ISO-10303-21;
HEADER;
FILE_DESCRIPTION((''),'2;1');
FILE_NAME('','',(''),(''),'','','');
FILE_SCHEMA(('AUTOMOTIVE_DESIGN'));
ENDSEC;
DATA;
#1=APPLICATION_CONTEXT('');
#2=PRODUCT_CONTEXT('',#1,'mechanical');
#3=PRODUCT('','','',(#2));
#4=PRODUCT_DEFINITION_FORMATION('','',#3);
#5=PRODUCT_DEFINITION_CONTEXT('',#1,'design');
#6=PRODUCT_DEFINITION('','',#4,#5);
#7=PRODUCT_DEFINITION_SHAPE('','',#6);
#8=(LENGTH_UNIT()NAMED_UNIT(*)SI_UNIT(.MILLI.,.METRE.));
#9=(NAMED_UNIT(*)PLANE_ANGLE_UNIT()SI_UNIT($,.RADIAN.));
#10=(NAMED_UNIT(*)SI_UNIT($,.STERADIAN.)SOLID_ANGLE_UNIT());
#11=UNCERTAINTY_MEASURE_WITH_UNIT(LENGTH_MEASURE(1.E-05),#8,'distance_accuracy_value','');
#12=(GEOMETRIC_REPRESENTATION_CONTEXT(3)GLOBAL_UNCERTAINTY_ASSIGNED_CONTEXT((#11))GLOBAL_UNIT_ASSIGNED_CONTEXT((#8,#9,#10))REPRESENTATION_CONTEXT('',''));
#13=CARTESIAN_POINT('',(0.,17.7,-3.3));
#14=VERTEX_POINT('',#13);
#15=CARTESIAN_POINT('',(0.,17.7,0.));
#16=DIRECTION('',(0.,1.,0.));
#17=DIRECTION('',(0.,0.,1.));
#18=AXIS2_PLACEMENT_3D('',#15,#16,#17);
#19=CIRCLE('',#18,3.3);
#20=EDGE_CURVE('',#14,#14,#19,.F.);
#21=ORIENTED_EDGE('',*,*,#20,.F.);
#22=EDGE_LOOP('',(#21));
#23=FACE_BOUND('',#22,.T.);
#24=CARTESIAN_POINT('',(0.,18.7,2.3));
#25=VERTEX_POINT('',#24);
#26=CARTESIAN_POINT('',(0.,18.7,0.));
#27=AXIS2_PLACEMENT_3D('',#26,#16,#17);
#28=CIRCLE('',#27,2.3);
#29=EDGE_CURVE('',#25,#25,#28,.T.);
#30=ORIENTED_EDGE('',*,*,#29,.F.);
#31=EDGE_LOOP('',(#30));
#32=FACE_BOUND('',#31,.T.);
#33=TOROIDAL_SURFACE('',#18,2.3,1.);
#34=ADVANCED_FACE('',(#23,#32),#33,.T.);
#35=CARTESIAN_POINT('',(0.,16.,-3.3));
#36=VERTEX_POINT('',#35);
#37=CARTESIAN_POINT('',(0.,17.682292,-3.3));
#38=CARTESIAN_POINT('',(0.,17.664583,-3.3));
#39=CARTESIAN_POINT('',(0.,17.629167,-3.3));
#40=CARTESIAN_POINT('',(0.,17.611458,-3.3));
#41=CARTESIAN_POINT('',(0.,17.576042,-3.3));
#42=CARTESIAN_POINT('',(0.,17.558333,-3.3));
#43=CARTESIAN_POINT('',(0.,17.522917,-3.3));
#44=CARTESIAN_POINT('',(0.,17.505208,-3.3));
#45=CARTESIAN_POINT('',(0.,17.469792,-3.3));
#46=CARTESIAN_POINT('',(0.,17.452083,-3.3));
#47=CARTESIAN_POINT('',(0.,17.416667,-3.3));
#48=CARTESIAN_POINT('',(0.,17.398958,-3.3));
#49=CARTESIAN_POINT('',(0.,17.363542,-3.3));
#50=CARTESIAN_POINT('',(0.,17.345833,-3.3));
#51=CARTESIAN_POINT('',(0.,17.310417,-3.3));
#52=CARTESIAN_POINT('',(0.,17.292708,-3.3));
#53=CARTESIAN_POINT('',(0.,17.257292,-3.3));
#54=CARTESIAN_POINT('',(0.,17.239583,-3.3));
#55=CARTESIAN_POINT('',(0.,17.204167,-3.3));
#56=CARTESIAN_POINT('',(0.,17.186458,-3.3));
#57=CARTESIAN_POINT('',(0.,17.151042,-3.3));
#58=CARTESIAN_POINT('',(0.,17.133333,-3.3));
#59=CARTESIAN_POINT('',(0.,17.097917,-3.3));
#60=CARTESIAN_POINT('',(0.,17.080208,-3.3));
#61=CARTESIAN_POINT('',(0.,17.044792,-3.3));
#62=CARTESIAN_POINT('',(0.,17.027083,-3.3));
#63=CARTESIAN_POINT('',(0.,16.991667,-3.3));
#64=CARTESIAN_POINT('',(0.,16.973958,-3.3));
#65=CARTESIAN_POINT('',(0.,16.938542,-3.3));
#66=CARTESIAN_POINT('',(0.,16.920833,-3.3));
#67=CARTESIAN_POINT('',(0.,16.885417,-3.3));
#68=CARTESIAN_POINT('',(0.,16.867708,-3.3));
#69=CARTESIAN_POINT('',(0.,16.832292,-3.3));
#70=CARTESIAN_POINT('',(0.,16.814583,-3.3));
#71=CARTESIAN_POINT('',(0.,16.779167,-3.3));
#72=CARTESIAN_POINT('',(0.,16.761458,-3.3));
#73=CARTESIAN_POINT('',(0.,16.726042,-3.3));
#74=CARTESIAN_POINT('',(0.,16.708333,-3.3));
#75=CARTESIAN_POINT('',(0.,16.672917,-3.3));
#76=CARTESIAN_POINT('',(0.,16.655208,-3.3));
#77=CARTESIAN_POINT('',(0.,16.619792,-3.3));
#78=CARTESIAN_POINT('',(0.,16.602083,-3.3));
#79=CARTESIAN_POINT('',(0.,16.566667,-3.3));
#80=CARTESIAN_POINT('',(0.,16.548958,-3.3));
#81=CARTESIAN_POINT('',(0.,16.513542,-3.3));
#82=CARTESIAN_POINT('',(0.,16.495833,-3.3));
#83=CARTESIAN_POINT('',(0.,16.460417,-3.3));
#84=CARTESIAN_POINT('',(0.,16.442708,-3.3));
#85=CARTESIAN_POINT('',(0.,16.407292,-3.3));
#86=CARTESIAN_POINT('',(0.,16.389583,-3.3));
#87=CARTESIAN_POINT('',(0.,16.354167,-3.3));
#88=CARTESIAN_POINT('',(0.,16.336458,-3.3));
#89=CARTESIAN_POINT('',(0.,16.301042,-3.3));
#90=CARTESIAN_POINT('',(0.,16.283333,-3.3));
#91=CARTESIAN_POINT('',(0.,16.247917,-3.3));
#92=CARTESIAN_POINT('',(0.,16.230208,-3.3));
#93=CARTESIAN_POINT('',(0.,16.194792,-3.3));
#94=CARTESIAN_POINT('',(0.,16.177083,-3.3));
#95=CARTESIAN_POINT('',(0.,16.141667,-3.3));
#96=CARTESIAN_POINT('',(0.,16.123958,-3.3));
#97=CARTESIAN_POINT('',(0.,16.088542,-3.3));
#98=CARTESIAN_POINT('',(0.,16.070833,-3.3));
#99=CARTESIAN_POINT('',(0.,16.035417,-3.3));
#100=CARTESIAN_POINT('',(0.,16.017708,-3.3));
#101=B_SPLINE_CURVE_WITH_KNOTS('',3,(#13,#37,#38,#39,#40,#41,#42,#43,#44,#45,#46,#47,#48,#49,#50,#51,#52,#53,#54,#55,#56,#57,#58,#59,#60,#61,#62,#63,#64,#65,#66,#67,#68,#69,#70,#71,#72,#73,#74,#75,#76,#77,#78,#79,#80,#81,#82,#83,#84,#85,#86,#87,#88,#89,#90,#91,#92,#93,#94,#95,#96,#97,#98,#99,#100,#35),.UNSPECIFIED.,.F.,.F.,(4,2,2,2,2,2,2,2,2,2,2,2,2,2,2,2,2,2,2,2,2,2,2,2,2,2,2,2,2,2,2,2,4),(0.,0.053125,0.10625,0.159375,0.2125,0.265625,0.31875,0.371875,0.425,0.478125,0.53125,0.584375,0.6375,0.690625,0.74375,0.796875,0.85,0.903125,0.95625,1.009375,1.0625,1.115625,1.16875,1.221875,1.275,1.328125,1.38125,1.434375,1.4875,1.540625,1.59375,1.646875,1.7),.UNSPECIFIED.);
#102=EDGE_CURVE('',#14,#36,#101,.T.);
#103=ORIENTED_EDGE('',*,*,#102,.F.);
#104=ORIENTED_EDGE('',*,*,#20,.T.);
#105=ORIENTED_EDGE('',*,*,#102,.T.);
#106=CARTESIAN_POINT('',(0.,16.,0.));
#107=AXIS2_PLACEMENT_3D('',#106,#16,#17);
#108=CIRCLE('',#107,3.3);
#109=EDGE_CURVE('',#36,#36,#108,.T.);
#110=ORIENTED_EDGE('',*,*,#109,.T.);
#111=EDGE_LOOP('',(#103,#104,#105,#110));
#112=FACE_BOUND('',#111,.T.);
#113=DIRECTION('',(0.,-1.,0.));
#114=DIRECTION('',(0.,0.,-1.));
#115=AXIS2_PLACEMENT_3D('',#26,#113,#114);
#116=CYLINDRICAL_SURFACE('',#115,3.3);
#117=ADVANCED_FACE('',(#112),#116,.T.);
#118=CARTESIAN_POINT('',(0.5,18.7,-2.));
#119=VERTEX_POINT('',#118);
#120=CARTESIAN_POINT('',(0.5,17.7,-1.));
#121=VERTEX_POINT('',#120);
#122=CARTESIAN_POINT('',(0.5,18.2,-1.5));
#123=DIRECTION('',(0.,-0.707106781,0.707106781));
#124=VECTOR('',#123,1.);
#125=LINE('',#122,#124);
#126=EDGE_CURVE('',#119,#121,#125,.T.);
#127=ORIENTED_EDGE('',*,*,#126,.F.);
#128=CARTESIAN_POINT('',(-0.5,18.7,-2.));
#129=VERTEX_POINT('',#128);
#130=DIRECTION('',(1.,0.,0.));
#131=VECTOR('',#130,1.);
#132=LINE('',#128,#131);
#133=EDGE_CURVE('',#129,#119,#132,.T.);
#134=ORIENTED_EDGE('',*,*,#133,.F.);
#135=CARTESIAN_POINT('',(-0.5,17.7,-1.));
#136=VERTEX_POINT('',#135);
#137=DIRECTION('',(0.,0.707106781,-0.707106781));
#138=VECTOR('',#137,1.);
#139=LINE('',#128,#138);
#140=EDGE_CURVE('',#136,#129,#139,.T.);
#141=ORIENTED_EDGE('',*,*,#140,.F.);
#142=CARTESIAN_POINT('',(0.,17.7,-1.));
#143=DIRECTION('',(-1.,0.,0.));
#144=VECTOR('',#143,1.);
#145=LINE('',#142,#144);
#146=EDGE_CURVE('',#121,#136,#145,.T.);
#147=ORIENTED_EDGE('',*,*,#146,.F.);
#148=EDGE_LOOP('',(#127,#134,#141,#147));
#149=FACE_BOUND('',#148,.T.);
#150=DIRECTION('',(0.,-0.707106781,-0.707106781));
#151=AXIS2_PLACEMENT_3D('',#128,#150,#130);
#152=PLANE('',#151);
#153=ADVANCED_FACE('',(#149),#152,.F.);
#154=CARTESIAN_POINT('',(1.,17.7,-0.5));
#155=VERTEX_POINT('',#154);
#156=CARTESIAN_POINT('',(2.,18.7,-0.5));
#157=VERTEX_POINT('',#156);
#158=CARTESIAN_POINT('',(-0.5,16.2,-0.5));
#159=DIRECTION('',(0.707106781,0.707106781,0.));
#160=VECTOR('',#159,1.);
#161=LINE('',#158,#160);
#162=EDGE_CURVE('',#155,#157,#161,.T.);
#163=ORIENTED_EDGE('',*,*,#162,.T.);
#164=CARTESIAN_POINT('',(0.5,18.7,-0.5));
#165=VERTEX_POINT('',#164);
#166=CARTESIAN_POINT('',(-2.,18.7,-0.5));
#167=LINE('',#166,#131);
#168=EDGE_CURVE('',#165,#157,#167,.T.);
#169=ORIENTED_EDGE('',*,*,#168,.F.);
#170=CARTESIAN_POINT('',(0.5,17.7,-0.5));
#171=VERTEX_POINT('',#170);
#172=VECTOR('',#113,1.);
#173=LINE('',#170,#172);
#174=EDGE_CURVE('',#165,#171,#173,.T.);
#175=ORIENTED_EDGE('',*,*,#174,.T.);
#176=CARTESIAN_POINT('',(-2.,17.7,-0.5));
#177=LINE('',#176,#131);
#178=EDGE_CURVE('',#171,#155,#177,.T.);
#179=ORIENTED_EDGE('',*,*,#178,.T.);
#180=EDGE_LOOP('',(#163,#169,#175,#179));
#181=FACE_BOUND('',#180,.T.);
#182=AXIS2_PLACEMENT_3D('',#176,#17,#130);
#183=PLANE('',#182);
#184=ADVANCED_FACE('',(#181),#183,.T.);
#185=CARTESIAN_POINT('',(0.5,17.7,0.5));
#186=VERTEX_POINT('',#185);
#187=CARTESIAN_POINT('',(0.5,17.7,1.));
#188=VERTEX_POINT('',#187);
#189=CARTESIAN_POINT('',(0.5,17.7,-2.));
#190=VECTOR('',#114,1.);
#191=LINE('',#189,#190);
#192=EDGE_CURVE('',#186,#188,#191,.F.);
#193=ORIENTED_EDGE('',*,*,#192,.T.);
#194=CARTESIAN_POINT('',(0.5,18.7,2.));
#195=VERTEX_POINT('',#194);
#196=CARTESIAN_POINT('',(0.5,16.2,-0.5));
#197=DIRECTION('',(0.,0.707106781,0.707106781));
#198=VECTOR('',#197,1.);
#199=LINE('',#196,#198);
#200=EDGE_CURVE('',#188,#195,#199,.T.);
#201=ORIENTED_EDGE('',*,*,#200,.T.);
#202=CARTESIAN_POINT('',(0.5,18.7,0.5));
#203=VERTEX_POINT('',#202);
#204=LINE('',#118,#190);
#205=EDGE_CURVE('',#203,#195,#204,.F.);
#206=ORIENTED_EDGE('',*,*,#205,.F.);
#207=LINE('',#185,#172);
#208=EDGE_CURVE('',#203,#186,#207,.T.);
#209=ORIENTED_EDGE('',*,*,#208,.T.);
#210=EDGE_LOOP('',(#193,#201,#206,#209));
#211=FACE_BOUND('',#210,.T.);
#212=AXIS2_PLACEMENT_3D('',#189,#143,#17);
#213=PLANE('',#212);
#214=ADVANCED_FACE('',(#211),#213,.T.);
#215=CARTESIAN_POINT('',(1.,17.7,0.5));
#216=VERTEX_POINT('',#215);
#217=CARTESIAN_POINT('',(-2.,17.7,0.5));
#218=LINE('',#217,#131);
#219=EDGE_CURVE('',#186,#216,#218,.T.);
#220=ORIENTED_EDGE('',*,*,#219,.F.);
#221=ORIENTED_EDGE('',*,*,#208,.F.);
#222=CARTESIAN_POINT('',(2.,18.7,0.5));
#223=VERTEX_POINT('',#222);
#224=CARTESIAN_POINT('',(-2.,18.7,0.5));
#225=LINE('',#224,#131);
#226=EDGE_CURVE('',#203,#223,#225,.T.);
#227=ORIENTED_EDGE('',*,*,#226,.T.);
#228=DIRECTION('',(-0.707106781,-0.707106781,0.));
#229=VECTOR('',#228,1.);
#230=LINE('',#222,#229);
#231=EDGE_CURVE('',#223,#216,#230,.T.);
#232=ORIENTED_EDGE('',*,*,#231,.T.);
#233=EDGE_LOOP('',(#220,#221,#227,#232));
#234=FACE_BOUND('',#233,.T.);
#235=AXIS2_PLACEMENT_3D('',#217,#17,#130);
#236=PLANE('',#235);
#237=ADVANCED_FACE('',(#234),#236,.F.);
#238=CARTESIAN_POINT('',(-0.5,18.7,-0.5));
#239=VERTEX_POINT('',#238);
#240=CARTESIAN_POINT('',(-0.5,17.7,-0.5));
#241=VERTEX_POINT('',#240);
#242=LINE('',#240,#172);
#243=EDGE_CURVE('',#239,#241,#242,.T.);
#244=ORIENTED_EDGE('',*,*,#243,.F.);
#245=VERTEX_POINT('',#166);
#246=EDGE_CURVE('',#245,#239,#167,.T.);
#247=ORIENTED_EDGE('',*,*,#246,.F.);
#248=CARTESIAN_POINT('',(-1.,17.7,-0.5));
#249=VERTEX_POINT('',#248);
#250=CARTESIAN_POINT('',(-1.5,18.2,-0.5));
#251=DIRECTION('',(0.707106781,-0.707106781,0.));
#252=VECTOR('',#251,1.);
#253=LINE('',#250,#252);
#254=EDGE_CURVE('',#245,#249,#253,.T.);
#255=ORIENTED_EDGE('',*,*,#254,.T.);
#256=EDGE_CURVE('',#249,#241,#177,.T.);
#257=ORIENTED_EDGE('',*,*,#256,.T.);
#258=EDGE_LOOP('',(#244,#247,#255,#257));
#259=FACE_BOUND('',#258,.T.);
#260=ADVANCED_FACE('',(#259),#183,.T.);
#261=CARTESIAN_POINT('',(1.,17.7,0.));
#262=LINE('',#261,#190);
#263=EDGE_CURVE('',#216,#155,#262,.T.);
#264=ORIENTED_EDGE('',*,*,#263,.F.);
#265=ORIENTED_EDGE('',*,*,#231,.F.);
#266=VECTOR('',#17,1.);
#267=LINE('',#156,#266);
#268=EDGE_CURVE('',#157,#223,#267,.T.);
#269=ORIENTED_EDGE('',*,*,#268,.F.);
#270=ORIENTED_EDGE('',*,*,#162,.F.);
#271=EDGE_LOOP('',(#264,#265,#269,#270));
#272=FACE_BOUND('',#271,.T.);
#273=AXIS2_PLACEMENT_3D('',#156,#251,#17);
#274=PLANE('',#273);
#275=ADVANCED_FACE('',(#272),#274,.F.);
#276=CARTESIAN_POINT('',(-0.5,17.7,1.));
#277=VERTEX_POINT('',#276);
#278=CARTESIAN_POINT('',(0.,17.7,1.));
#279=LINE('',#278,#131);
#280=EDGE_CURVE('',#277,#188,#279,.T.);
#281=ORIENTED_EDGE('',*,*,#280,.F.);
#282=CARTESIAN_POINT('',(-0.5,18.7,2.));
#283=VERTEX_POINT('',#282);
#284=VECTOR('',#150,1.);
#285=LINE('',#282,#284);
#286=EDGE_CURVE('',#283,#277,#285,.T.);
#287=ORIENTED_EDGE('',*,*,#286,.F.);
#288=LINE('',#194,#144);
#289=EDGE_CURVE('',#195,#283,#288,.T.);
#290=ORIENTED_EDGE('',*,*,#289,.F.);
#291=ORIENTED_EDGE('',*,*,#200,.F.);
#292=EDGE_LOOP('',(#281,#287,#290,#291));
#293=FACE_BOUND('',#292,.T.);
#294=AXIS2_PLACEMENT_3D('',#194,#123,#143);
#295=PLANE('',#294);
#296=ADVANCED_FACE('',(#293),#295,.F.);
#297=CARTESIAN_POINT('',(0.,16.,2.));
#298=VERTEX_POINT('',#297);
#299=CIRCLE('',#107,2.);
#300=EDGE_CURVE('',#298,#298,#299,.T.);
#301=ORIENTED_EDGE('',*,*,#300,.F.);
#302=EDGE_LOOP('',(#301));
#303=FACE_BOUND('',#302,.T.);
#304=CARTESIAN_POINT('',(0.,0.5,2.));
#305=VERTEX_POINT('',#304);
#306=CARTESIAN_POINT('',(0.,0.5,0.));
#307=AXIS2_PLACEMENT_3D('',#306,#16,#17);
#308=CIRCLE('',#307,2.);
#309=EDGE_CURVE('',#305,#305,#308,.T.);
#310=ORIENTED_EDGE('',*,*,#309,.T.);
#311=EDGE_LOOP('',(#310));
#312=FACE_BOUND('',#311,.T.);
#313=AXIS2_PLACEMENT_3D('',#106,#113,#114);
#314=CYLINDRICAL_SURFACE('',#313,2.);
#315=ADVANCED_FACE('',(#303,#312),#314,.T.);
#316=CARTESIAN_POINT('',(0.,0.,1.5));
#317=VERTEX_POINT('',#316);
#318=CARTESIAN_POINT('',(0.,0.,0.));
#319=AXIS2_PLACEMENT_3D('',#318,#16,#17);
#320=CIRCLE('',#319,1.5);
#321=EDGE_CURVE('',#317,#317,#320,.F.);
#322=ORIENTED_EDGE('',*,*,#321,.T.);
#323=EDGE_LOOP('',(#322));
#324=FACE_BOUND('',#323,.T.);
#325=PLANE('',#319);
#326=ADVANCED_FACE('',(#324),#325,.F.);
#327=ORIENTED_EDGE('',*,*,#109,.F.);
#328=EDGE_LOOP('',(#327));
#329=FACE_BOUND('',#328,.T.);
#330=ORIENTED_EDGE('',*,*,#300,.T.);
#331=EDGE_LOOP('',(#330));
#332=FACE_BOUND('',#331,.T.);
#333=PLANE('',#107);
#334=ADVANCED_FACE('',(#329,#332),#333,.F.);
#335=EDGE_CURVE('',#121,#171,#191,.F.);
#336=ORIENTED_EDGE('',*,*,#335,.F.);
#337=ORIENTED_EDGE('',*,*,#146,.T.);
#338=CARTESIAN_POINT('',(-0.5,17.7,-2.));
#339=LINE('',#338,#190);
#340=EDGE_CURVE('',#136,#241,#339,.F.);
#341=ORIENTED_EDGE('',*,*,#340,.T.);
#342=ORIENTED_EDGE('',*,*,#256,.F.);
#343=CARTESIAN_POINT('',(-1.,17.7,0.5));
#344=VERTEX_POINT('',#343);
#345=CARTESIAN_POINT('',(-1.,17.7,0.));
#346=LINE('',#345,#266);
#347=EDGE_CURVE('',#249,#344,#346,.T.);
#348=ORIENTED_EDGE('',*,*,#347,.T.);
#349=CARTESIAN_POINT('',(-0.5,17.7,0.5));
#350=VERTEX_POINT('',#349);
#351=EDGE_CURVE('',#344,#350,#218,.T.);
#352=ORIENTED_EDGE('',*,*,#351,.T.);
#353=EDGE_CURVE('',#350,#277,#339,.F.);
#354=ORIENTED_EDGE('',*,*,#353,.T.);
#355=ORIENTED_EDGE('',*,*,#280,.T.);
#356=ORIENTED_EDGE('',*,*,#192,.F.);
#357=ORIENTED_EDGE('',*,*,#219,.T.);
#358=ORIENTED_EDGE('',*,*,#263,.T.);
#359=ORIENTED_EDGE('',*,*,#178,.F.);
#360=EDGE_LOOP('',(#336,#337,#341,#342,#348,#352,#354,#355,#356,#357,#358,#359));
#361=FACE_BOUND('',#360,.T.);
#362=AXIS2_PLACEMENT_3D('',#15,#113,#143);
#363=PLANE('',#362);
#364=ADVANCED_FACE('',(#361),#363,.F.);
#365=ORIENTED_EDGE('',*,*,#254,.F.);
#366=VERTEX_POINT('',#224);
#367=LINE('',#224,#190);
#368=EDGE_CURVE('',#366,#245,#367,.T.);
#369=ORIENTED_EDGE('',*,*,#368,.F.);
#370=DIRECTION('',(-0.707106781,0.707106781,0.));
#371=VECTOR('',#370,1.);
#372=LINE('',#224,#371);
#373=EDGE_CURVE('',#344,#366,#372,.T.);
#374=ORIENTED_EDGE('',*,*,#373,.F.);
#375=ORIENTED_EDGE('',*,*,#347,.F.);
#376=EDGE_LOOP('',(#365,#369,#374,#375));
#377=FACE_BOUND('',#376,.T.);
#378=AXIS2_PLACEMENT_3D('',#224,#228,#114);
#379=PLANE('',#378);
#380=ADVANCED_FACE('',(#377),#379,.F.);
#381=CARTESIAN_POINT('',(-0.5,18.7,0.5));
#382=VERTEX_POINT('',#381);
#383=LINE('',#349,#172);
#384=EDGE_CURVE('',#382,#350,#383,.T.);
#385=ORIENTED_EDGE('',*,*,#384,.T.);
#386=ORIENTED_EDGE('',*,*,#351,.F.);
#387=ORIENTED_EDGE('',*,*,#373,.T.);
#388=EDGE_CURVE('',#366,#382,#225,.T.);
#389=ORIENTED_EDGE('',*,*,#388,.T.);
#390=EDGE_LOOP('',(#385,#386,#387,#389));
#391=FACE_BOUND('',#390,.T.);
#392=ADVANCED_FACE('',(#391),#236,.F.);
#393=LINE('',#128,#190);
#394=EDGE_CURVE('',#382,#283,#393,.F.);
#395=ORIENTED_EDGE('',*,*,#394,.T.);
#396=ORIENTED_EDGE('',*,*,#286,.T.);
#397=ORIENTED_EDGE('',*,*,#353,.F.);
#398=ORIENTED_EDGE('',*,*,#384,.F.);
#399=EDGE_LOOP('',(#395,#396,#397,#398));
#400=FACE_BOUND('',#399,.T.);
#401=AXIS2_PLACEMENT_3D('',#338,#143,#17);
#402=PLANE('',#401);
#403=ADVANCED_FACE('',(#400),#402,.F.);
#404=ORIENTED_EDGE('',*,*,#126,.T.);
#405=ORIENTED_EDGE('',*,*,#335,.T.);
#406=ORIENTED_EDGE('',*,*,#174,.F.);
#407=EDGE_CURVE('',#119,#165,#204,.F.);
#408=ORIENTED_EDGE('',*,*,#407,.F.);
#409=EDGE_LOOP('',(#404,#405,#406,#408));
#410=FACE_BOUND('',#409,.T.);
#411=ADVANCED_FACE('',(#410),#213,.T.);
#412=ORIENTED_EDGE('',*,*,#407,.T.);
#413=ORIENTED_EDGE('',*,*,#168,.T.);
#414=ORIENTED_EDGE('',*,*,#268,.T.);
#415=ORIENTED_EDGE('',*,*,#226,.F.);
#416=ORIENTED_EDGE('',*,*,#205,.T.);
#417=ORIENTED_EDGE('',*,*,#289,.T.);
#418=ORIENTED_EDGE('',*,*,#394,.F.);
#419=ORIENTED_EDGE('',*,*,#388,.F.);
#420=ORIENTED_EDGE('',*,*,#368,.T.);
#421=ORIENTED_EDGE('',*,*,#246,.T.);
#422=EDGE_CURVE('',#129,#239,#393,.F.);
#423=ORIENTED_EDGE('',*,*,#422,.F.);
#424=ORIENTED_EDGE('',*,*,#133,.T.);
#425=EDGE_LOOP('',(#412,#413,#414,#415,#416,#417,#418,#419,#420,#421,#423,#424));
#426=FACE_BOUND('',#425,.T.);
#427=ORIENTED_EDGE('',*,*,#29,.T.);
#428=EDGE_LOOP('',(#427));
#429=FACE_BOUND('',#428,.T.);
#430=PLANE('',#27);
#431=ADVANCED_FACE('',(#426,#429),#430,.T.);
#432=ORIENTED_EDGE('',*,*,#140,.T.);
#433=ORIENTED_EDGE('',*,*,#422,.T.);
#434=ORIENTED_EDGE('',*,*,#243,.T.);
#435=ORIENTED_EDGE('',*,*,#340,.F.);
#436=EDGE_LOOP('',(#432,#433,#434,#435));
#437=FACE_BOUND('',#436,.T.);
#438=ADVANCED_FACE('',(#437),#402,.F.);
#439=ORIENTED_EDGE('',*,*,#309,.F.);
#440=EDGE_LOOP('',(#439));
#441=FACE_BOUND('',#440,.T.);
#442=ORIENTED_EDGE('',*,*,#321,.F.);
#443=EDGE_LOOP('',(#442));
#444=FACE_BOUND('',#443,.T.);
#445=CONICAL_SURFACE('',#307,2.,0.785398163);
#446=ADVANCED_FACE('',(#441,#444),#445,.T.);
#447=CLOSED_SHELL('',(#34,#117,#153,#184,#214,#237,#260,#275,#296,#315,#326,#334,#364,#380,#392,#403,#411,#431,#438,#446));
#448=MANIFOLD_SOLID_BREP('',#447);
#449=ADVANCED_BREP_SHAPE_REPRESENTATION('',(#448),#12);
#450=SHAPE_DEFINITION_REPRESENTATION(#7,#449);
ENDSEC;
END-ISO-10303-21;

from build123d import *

# Parameters (mm, degrees)
SKETCH_1_R          = 2
EXTRUDE_1_DEPTH     = 16
SKETCH_2_R          = 3.3
EXTRUDE_2_DEPTH     = 2.7
FILLET_1_R          = 1
CHAMFER_1_SIZE      = 0.5
SKETCH_3_W          = 4
SKETCH_3_H          = 1
SKETCH_3_W_2        = 1
SKETCH_3_H_2        = 4
CUT_EXTRUDE_1_DEPTH = 1
CHAMFER_2_SIZE      = 1


with BuildPart() as part:
    # 草图1 → 凸台-拉伸1 (new body)
    with BuildSketch(Plane(origin=(0, 0, 0), x_dir=(1, 0, 0), z_dir=(0, 1, 0))):
        with Locations(Location((0, 0, 0), (0, 0, 270))):
            Circle(SKETCH_1_R)
    extrude(amount=EXTRUDE_1_DEPTH)

    # 草图2 → 凸台-拉伸2 (add)
    with BuildSketch(Plane(origin=(0, 16, 0), x_dir=(1, 0, 0), z_dir=(0, 1, 0))):
        with Locations(Location((0, 0, 0), (0, 0, 90))):
            Circle(SKETCH_2_R)
    extrude(amount=EXTRUDE_2_DEPTH)

    # 圆角1
    fillet_1_edges = [part.edges().sort_by_distance(p)[0] for p in [
        (0, 18.7, 3.3),
    ]]
    fillet(fillet_1_edges, radius=FILLET_1_R)

    # 倒角1
    chamfer_1_edges = [part.edges().sort_by_distance(p)[0] for p in [
        (0, 0, -2),
    ]]
    chamfer(chamfer_1_edges, length=CHAMFER_1_SIZE)

    # 草图3 → 切除-拉伸-薄壁1 (cut)
    with BuildSketch(Plane(origin=(0, 18.7, 0), x_dir=(1, 0, 0), z_dir=(0, 1, 0))):
        Rectangle(SKETCH_3_W, SKETCH_3_H)
        Rectangle(SKETCH_3_W_2, SKETCH_3_H_2)
    extrude(amount=-CUT_EXTRUDE_1_DEPTH, mode=Mode.SUBTRACT)

    # 倒角2
    chamfer_2_edges = [part.edges().sort_by_distance(p)[0] for p in [
        (0, 17.7, 2),
        (2, 17.7, 0),
        (0, 17.7, -2),
        (-2, 17.7, 0),
    ]]
    chamfer(chamfer_2_edges, length=CHAMFER_2_SIZE - 0.0001)  # a hair under: the kernel refuses the full size


solid = part.part
